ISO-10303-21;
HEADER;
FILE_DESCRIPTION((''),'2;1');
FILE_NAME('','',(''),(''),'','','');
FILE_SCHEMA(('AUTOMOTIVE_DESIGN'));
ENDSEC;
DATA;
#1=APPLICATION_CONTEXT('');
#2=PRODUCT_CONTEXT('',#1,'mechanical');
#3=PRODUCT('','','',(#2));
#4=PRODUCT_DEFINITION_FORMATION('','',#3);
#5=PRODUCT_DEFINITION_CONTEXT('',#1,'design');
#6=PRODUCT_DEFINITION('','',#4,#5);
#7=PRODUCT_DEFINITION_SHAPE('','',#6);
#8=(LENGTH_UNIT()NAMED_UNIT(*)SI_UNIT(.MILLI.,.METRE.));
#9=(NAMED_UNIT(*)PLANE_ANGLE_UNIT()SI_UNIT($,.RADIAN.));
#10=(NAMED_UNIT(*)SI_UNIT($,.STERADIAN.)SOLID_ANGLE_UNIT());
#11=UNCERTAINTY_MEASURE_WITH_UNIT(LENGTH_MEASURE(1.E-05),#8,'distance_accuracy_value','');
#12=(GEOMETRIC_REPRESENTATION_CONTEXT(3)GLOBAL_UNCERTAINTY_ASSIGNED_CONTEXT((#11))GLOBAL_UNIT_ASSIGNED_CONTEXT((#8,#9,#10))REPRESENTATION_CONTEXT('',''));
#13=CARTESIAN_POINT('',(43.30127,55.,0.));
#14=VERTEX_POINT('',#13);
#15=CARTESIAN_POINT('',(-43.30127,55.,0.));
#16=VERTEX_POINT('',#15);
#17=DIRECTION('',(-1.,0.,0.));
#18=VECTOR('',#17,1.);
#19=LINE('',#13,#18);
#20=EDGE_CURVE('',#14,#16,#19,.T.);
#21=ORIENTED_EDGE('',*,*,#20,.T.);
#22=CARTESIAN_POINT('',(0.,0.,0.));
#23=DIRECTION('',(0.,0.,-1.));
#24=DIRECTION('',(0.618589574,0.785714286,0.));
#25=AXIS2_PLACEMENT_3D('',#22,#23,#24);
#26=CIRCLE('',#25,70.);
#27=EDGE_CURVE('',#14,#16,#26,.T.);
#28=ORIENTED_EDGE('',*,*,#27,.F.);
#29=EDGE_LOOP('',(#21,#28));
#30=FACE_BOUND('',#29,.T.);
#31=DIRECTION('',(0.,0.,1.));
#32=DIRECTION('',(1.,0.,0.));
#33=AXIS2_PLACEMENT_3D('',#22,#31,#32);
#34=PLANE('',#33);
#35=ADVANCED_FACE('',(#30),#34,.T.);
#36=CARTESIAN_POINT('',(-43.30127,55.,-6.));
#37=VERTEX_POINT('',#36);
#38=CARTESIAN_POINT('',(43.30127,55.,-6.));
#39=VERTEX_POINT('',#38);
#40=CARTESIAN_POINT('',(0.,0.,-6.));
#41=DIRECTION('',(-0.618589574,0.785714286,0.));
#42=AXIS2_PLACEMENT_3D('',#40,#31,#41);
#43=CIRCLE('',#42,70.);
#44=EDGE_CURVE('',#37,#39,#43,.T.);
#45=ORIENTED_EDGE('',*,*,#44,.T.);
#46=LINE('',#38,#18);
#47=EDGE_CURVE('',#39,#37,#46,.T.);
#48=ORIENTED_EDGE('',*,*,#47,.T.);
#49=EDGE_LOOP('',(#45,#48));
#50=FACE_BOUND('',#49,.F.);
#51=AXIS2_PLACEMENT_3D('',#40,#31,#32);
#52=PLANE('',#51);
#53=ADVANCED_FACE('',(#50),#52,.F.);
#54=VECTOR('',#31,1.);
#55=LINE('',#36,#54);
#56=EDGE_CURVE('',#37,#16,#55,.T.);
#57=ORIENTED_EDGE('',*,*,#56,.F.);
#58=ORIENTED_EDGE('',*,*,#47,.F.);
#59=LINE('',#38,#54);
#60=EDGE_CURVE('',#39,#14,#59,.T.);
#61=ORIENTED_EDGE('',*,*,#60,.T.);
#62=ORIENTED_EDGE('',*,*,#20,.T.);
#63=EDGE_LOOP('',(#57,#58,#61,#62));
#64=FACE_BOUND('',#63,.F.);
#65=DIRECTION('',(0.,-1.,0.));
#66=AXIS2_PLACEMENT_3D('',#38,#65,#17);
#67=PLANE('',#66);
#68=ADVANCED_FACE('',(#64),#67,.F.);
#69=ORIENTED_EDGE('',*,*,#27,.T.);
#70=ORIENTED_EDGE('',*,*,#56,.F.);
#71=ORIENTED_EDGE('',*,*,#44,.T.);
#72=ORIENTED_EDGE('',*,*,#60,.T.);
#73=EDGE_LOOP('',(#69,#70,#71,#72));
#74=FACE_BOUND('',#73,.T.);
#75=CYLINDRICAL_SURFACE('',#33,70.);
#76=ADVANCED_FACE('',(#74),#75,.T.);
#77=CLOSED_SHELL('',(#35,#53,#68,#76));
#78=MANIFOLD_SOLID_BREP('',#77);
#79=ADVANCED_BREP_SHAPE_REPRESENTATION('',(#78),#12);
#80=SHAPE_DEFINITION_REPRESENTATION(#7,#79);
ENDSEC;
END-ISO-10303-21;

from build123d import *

# Parameters (mm, degrees)
F0_R     = 70
F1_DEPTH = 6
F4_DEPTH = 6


with BuildPart() as f1:
    # F0 (on Top) → F1 (new body)
    with BuildSketch(Plane.XY):
        Circle(F0_R)
    extrude(amount=-F1_DEPTH)

    # F3 (on face) → F4 (cut)
    with BuildSketch(Plane(origin=(0, 0, -6), x_dir=(1, 0, 0), z_dir=(0, 0, -1))):
        with BuildLine():
            Line((43.3012701892, -55), (0, -55))
            Line((0, -55), (-43.3012701892, -55))
            ThreePointArc((-43.3012701892, -55), (0, -70), (43.3012701892, -55))
        make_face()
    extrude(amount=-F4_DEPTH, mode=Mode.SUBTRACT)


solid = f1.part
